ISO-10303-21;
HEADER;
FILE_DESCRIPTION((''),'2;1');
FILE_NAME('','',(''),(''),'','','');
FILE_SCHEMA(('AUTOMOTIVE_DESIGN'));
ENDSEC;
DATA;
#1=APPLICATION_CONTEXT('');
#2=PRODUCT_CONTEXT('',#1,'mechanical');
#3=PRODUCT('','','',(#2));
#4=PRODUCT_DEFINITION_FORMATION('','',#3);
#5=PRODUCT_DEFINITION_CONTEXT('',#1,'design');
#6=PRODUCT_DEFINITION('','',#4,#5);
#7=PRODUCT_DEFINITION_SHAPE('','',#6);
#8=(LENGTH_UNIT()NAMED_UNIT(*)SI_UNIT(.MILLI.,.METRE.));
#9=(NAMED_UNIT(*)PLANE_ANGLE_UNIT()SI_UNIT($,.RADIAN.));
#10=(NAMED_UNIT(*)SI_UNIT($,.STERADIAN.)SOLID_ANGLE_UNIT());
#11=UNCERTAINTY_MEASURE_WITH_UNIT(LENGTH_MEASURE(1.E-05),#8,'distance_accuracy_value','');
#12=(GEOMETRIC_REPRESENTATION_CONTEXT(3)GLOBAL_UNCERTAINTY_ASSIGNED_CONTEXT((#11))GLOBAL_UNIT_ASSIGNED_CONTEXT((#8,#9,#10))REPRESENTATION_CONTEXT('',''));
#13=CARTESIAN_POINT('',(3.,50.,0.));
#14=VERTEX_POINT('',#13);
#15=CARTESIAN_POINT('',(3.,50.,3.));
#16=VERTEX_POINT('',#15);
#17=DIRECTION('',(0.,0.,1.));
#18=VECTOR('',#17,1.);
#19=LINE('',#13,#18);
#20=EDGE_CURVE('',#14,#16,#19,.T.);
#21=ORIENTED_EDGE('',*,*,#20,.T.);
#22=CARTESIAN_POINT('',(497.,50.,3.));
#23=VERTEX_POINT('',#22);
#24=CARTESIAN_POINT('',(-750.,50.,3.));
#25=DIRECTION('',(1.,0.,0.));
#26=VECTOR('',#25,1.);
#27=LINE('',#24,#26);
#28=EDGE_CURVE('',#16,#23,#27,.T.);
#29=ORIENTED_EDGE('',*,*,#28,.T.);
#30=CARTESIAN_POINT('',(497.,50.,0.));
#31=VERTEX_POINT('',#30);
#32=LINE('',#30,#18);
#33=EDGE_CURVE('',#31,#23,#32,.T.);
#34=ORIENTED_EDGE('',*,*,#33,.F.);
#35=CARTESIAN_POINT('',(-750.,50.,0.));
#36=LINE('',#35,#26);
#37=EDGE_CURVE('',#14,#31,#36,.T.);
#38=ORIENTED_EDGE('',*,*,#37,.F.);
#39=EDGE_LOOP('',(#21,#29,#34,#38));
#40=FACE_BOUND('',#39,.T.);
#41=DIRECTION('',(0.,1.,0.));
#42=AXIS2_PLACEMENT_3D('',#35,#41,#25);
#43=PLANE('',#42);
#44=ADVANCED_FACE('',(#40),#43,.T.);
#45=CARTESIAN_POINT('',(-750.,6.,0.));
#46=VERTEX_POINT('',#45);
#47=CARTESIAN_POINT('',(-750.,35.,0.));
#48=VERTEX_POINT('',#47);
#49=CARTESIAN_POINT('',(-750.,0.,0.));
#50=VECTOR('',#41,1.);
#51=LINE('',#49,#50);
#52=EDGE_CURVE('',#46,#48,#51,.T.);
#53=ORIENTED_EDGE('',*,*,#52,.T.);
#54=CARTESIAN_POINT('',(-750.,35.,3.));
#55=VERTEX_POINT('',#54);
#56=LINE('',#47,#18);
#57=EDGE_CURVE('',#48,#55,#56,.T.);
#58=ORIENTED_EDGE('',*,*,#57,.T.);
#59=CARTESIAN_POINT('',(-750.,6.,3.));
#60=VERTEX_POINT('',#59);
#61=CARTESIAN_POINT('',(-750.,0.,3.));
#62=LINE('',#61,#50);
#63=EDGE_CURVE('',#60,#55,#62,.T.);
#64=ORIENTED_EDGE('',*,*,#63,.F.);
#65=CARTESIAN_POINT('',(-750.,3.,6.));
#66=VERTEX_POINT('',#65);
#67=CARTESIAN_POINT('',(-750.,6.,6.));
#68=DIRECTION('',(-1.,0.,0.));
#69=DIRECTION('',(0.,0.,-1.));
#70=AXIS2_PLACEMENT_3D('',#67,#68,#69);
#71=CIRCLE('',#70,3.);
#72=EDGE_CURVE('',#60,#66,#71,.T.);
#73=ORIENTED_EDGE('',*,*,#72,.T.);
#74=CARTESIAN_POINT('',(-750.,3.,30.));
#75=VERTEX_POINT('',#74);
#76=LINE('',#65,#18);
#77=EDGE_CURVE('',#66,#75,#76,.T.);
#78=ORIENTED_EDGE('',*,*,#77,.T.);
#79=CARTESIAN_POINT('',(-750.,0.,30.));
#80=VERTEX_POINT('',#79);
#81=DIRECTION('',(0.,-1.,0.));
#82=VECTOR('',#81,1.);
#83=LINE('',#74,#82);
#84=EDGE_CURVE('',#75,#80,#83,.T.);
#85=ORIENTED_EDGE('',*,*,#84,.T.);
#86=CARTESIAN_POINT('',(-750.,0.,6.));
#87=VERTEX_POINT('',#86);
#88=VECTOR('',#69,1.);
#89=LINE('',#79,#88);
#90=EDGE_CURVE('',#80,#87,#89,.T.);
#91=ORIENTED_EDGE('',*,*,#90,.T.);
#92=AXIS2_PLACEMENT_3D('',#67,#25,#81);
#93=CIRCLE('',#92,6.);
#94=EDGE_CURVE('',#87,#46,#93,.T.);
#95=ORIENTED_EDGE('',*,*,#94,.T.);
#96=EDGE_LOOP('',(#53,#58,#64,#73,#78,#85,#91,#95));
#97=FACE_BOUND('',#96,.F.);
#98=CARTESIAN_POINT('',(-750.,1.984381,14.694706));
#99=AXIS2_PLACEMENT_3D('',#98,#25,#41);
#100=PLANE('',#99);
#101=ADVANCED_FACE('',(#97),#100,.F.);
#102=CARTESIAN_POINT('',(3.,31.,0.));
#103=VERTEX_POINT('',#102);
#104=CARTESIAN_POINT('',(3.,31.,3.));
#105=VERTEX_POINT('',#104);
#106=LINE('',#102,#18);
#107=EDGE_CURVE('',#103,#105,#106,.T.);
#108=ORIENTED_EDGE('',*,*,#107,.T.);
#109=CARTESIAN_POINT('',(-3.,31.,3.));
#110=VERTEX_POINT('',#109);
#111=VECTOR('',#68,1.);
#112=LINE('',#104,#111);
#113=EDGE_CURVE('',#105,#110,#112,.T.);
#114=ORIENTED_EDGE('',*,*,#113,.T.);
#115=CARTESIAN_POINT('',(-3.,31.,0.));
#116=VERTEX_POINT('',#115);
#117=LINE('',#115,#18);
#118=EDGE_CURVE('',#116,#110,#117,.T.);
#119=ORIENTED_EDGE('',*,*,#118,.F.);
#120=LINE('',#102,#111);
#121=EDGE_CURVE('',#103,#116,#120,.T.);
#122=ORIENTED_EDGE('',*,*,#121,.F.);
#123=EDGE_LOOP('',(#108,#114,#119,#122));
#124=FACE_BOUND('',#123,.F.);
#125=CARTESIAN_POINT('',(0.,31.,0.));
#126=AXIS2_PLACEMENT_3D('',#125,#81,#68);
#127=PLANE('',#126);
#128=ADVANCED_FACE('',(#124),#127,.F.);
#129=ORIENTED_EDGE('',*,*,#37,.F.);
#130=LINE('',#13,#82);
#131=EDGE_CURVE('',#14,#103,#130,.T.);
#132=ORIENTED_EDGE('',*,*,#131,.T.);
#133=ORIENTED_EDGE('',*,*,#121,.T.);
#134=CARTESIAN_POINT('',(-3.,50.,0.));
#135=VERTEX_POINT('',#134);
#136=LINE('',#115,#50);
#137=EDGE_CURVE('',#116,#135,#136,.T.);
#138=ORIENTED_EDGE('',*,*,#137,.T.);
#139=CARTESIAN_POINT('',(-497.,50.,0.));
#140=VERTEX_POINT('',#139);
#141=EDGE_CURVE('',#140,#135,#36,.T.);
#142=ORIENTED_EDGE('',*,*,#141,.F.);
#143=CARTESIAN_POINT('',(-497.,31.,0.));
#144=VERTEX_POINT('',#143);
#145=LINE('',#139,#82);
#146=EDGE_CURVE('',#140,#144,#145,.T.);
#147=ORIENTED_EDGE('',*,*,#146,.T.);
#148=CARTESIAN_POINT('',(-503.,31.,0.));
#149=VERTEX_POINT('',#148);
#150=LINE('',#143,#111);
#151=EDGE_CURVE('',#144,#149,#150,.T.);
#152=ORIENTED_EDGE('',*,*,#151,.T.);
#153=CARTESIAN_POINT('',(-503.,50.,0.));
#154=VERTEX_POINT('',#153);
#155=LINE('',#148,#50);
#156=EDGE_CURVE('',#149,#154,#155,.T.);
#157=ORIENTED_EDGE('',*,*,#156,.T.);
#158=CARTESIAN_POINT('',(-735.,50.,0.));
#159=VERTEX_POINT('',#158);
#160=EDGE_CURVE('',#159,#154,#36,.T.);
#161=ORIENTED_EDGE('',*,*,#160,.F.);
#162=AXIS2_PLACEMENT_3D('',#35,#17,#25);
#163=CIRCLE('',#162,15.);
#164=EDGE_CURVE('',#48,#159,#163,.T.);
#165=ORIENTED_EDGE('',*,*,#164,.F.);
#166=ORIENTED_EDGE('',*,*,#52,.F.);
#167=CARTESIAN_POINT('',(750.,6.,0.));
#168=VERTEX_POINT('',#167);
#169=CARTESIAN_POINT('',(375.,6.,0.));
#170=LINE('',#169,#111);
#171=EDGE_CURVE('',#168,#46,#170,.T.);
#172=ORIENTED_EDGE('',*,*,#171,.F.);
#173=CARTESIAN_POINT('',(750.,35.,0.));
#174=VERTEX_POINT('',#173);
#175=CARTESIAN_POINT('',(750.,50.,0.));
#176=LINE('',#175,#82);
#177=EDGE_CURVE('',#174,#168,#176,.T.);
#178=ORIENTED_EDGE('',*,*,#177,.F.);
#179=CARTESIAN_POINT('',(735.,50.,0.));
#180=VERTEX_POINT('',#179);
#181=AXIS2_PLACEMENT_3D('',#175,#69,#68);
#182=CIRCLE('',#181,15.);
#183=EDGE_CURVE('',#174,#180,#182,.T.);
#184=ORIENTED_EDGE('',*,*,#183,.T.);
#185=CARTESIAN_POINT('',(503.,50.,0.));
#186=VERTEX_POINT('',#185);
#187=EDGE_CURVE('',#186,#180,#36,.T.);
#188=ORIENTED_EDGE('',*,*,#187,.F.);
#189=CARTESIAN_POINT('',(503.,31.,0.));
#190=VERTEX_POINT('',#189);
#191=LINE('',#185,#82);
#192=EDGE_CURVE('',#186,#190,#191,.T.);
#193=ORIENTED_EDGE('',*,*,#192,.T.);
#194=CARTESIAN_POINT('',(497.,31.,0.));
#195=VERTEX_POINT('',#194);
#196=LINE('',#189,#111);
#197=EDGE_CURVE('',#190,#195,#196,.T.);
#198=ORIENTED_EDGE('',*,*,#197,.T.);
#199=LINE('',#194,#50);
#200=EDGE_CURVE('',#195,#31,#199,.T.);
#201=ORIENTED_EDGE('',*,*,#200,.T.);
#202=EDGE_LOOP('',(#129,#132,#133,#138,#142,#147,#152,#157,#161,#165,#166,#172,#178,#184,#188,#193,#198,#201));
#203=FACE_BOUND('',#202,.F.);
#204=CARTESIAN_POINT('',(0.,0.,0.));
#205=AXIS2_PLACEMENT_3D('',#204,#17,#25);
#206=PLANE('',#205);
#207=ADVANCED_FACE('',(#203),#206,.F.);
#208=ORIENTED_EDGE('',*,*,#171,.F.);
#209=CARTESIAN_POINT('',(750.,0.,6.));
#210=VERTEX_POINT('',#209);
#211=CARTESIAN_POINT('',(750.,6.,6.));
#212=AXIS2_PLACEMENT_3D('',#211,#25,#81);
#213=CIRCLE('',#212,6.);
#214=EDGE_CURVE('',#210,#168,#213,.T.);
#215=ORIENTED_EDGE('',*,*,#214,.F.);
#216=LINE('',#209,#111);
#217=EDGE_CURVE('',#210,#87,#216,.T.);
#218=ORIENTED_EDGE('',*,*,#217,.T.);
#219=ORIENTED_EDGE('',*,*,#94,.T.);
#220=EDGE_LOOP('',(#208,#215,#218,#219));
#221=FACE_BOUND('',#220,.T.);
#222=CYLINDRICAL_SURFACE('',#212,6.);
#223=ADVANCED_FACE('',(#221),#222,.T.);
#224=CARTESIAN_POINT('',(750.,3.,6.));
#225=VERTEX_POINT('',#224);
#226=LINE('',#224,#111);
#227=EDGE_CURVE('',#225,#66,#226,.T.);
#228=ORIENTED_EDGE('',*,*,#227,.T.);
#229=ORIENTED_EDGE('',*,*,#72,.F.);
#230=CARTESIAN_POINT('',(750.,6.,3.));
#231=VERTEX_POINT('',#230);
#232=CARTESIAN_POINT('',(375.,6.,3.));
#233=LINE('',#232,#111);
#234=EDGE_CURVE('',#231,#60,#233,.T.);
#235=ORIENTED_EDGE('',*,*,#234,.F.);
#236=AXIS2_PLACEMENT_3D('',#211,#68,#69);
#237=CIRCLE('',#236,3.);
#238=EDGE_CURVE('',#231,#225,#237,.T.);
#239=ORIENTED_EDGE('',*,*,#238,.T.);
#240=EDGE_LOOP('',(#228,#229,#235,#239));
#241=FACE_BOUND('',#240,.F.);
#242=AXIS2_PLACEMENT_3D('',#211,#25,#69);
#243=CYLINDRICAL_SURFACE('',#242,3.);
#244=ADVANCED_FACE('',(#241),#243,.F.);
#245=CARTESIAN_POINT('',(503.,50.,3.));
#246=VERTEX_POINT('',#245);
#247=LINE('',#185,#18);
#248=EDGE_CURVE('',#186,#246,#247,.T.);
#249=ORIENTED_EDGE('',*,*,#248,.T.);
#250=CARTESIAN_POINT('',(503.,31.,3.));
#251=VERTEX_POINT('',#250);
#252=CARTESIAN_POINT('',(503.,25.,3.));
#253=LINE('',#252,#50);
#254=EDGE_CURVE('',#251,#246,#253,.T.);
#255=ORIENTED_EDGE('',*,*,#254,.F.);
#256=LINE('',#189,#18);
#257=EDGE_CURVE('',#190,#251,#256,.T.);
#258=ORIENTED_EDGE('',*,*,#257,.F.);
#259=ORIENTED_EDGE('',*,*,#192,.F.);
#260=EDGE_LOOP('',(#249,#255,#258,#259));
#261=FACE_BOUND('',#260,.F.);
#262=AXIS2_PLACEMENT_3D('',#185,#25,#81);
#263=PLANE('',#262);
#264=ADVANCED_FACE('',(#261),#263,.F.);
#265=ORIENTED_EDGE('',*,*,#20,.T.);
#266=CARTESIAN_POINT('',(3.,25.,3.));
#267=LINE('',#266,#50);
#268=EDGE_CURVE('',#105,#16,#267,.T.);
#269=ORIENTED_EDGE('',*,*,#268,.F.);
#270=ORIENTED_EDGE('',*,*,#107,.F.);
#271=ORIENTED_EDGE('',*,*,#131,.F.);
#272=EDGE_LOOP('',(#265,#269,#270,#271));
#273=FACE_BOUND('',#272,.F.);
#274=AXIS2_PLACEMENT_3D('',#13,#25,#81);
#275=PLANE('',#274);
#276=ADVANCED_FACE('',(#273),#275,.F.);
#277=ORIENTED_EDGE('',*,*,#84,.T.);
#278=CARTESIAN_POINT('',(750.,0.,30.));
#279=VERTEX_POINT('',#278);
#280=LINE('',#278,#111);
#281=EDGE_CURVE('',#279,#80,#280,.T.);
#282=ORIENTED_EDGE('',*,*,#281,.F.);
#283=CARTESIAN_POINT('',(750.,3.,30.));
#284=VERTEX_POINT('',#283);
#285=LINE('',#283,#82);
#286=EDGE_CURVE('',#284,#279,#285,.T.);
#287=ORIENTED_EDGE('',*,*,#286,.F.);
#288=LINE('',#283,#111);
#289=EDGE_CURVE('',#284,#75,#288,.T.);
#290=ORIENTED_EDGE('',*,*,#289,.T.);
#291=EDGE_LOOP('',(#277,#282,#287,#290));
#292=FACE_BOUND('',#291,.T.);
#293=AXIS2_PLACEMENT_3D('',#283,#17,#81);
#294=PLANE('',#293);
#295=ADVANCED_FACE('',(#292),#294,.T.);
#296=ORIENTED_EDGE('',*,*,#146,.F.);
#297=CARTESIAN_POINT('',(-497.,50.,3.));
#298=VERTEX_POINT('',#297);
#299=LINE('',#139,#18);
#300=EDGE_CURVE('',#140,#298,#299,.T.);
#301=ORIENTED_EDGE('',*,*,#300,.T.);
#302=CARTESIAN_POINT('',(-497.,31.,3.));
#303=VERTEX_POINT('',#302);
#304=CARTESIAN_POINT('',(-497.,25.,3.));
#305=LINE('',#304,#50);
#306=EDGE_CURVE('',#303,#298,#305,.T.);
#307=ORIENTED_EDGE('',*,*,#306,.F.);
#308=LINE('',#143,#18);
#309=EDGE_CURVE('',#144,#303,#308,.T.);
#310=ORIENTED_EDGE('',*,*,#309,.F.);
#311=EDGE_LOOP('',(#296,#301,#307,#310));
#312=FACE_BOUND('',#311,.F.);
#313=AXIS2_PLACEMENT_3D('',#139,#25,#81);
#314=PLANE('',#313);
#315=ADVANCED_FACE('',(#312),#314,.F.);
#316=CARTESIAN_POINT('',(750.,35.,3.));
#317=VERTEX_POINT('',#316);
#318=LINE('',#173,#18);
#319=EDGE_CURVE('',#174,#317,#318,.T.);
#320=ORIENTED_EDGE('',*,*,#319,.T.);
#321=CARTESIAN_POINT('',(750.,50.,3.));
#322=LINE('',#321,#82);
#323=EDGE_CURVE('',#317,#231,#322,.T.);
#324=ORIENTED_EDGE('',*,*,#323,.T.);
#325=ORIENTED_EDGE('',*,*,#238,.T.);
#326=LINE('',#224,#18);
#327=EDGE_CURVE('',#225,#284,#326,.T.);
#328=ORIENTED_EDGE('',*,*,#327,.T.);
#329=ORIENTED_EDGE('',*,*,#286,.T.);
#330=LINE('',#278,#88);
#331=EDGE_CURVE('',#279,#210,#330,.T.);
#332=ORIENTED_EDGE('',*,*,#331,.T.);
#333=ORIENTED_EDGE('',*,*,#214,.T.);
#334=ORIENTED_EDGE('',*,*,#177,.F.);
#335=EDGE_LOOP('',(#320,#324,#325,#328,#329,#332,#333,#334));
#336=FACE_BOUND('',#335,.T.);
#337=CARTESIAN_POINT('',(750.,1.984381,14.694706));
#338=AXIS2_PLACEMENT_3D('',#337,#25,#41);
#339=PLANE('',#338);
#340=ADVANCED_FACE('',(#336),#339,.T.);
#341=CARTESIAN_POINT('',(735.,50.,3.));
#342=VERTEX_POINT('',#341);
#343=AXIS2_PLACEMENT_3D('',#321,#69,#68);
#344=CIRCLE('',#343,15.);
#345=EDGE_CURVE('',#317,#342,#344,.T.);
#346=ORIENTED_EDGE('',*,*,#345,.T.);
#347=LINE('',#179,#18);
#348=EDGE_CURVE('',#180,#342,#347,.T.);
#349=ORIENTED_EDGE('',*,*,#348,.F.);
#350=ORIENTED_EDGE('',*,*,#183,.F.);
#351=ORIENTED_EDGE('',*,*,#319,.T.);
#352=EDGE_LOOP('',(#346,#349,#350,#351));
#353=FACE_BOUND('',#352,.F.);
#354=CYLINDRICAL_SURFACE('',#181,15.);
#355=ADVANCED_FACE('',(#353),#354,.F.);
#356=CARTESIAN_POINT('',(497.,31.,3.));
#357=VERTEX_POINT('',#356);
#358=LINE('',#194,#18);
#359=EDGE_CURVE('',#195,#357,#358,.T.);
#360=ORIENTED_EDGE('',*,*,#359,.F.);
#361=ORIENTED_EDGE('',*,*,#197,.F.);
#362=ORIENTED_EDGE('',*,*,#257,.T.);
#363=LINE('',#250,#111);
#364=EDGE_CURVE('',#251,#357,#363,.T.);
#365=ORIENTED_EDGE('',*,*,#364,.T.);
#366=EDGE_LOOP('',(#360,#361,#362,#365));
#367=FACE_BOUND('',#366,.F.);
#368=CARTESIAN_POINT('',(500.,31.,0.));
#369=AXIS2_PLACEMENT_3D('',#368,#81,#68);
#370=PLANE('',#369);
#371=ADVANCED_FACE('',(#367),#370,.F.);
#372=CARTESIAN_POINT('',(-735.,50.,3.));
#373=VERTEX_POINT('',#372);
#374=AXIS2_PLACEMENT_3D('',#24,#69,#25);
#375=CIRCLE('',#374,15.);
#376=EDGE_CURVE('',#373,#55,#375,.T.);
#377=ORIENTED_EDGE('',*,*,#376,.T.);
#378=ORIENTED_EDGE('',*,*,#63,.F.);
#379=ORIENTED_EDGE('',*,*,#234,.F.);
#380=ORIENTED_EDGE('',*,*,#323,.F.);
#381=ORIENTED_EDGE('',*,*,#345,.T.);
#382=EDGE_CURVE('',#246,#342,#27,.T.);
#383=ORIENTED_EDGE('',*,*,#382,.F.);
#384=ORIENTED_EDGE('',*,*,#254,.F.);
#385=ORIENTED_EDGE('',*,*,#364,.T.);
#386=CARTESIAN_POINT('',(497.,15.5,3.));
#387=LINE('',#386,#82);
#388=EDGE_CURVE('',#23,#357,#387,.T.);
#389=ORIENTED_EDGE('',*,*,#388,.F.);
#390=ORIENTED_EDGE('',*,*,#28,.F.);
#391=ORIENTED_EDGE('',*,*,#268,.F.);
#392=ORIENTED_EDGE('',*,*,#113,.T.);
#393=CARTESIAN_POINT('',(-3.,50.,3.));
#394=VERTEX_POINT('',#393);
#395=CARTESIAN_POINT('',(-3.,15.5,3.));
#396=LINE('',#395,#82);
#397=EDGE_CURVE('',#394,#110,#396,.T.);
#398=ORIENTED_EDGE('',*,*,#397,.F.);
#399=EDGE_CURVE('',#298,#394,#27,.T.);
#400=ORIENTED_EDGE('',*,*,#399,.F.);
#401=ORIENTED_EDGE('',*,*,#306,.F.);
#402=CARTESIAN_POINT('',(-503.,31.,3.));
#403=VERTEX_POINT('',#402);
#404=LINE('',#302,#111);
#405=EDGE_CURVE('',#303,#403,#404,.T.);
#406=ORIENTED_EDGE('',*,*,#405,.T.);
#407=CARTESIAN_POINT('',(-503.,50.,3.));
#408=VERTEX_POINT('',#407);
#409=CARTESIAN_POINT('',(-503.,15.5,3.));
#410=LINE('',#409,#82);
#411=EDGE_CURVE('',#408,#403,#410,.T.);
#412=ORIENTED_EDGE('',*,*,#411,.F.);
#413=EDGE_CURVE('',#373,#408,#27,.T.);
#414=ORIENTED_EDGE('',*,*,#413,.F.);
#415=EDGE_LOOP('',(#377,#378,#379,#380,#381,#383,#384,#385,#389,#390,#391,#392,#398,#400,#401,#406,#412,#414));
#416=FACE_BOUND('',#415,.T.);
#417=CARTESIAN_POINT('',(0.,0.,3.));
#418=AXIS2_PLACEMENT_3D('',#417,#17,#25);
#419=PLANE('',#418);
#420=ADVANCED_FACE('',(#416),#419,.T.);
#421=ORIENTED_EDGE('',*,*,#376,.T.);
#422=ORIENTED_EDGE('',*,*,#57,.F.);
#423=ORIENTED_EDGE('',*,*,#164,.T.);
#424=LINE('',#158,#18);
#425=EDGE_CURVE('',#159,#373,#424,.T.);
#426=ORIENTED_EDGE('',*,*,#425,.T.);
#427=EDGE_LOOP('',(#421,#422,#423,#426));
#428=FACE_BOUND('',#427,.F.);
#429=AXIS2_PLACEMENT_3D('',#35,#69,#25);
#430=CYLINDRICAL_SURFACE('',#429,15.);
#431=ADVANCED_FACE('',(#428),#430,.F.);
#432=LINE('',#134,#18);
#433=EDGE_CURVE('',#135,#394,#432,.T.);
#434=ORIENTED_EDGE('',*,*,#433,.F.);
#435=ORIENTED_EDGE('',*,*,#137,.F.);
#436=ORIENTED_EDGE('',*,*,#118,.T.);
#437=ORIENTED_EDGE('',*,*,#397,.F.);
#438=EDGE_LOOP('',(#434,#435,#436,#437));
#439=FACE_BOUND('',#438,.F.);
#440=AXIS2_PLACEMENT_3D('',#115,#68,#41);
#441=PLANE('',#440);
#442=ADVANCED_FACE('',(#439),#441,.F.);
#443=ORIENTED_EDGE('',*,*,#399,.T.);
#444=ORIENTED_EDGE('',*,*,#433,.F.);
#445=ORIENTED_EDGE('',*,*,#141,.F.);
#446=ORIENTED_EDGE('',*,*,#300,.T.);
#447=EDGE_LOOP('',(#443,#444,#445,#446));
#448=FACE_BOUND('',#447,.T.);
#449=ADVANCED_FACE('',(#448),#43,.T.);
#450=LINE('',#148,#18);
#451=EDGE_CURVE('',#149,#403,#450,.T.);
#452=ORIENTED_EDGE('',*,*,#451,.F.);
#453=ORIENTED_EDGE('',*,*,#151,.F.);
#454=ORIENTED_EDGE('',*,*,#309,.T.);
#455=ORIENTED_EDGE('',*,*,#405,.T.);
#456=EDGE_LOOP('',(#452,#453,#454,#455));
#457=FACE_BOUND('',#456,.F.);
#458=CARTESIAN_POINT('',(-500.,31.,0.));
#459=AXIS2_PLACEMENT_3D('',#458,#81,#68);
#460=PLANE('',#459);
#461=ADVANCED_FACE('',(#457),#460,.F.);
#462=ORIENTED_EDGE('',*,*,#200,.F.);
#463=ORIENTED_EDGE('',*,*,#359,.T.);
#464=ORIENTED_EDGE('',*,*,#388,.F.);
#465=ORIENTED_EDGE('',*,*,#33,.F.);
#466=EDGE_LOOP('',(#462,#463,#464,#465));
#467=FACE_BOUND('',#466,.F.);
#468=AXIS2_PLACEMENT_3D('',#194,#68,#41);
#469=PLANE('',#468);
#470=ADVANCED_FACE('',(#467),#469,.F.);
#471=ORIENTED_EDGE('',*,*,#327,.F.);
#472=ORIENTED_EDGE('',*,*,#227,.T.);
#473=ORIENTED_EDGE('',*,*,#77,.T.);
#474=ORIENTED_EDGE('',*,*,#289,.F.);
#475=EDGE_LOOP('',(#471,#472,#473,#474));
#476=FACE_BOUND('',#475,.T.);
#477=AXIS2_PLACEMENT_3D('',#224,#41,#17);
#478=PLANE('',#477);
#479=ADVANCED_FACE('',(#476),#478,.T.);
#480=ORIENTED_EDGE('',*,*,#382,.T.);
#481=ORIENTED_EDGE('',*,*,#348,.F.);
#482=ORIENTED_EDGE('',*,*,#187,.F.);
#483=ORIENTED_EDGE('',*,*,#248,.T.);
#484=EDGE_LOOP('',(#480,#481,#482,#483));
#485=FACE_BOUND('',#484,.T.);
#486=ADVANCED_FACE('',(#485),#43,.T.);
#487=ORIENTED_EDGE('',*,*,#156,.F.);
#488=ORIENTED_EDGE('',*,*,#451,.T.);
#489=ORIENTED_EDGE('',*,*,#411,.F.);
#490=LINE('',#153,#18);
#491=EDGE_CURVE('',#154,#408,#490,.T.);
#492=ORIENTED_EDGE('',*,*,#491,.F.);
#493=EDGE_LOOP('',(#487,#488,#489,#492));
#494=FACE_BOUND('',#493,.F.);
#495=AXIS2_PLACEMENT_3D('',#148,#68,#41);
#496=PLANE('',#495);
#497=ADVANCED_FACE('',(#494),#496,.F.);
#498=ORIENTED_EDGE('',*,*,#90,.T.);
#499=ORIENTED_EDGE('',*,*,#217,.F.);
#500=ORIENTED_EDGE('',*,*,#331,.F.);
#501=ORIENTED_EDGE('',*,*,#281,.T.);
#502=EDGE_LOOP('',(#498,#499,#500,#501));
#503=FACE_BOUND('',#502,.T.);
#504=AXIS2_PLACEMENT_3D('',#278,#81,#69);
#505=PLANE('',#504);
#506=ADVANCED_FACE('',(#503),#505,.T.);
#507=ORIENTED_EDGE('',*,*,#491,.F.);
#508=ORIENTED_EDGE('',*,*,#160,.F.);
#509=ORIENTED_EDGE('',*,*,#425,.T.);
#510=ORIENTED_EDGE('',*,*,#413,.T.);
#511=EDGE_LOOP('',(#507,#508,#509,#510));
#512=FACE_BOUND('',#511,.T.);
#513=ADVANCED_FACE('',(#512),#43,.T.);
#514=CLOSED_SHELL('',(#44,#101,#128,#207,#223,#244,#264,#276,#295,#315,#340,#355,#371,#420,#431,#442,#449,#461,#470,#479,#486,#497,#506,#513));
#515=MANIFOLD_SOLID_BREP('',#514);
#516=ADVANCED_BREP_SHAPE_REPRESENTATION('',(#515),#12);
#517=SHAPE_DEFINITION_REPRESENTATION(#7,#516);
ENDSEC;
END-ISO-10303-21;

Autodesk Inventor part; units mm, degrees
ref_plane "YZ Plane" through (0, 0, 0) normal (1, 0, 0) x (0, 1, 0)
ref_plane "XZ Plane" through (0, 0, 0) normal (0, 1, 0) x (-1, 0, 0)
ref_plane "XY Plane" through (0, 0, 0) normal (0, 0, 1) x (1, 0, 0)
sketch "Sketch1" plane through (0, 0, 0) normal (0, 0, 1) x (1, 0, 0)
  line L0 (-750, 50) -> (750, 50)
  line L1 (750, 50) -> (750, 0)
  line L2 (750, 0) -> (-750, 0)
  line L3 (-750, 0) -> (-750, 50)
  point P0 (0, 0)
  point P1 (0, 0)
  dimension "d0" = 1500
  dimension "d1" = 50
extrude "Plate1" add sketch "Sketch1" along normal blind 3
sketch "Sketch2" plane through (750, 3, 0) normal (0, -1, 0) x (1, 0, 0)
  line L0 (-1500, 0) -> (0, 0)
  line L1 (0, 0) -> (0, 30)
  line L2 (0, 30) -> (-1500, 30)
  line L3 (-1500, 30) -> (-1500, 0)
edge flange "Flange1" height 30 angle 90 thickness 3 bend radius 3 thickness toward (0, -1, 0) relief tear relief width 3 relief depth 1.5 edges at (0, 0, 3) wall of the first edge with corners at (-750, 3, 0) (750, 3, 0) (750, 3, 30) (-750, 3, 30)
bend "Bend1"
corner "Corner1"
sketch "Sketch5" plane through (0, 0, 0) normal (0, 0, -1) x (-1, 0, 0)
  line L0 (750, 50) -> (-750, 50) projected
  line L1 (497, 50) -> (497, 31)
  line L2 (497, 31) -> (500, 31)
  line L3 (500, 31) -> (500, 50) construction
  line L4 (750, 0) -> (-750, 0) projected
  line L5 (500, 31) -> (503, 31)
  line L6 (503, 31) -> (503, 50)
  point P0 (0, 0)
  dimension "d18" = 3
  dimension "d19" = 250
  dimension "d20" = 31
  dimension "d27" = 3
extrude "Extrusion1" cut sketch "Sketch5" against normal through all
pattern_linear "Rectangular Pattern1" count 3 spacing 500 along (1, 0, 0) of "Extrusion1"
sketch "Sketch6" plane through (0, 0, 0) normal (0, 0, -1) x (-1, 0, 0)
  line L0 (-750, 50) -> (-750, 6) projected
  circle A0 centre (-750, 50) radius 15
  line L1 (-750, 50) -> (750, 50) projected
  point P0 (0, 0)
  point P1 (-503, 50)
  point P2 (-735, 50)
  point P3 (-750, 35)
  dimension "d24" = 30
extrude "Extrusion2" cut sketch "Sketch6" against normal through all contours L1 A0 L0 picked at (-740.1254, 48.8874)
mirror "Mirror1" about plane through (0, 0, 0) normal (1, 0, 0) of "Extrusion2"
equation "\"d1\" = Стрингер_1"
equation "\"d18\" = Thickness"
equation "\"d27\" = d18"
equation "\"d2\" = Thickness"
equation "\"d3\" = BendReliefWidth"
equation "\"d4\" = BendReliefDepth"
equation "\"d5\" = MinimumRemnant"
equation "\"d6\" = TransitionRadius"
equation "\"d9\" = BendRadius"
equation "\"d10\" = CornerReliefSize"
equation "\"d11\" = GapSize"
equation "\"d12\" = JacobiRadiusSize"
equation "\"BendRadius\" = Thickness"
equation "\"BendReliefWidth\" = Thickness"
equation "\"BendReliefDepth\" = 0.5 * Thickness"
equation "\"CornerReliefSize\" = 4 * Thickness"
equation "\"MinimumRemnant\" = 2 * Thickness"
equation "\"TransitionRadius\" = BendRadius"
equation "\"JacobiRadiusSize\" = BendRadius"
equation "\"GapSize\" = Thickness"
equation "\"qqqqqq\" = 67.35706"
equation "\"Стрингер_1\" = 50"
equation "\"Thickness\" = 3"
properties part number "МОО 051 стрингер спина 12"
